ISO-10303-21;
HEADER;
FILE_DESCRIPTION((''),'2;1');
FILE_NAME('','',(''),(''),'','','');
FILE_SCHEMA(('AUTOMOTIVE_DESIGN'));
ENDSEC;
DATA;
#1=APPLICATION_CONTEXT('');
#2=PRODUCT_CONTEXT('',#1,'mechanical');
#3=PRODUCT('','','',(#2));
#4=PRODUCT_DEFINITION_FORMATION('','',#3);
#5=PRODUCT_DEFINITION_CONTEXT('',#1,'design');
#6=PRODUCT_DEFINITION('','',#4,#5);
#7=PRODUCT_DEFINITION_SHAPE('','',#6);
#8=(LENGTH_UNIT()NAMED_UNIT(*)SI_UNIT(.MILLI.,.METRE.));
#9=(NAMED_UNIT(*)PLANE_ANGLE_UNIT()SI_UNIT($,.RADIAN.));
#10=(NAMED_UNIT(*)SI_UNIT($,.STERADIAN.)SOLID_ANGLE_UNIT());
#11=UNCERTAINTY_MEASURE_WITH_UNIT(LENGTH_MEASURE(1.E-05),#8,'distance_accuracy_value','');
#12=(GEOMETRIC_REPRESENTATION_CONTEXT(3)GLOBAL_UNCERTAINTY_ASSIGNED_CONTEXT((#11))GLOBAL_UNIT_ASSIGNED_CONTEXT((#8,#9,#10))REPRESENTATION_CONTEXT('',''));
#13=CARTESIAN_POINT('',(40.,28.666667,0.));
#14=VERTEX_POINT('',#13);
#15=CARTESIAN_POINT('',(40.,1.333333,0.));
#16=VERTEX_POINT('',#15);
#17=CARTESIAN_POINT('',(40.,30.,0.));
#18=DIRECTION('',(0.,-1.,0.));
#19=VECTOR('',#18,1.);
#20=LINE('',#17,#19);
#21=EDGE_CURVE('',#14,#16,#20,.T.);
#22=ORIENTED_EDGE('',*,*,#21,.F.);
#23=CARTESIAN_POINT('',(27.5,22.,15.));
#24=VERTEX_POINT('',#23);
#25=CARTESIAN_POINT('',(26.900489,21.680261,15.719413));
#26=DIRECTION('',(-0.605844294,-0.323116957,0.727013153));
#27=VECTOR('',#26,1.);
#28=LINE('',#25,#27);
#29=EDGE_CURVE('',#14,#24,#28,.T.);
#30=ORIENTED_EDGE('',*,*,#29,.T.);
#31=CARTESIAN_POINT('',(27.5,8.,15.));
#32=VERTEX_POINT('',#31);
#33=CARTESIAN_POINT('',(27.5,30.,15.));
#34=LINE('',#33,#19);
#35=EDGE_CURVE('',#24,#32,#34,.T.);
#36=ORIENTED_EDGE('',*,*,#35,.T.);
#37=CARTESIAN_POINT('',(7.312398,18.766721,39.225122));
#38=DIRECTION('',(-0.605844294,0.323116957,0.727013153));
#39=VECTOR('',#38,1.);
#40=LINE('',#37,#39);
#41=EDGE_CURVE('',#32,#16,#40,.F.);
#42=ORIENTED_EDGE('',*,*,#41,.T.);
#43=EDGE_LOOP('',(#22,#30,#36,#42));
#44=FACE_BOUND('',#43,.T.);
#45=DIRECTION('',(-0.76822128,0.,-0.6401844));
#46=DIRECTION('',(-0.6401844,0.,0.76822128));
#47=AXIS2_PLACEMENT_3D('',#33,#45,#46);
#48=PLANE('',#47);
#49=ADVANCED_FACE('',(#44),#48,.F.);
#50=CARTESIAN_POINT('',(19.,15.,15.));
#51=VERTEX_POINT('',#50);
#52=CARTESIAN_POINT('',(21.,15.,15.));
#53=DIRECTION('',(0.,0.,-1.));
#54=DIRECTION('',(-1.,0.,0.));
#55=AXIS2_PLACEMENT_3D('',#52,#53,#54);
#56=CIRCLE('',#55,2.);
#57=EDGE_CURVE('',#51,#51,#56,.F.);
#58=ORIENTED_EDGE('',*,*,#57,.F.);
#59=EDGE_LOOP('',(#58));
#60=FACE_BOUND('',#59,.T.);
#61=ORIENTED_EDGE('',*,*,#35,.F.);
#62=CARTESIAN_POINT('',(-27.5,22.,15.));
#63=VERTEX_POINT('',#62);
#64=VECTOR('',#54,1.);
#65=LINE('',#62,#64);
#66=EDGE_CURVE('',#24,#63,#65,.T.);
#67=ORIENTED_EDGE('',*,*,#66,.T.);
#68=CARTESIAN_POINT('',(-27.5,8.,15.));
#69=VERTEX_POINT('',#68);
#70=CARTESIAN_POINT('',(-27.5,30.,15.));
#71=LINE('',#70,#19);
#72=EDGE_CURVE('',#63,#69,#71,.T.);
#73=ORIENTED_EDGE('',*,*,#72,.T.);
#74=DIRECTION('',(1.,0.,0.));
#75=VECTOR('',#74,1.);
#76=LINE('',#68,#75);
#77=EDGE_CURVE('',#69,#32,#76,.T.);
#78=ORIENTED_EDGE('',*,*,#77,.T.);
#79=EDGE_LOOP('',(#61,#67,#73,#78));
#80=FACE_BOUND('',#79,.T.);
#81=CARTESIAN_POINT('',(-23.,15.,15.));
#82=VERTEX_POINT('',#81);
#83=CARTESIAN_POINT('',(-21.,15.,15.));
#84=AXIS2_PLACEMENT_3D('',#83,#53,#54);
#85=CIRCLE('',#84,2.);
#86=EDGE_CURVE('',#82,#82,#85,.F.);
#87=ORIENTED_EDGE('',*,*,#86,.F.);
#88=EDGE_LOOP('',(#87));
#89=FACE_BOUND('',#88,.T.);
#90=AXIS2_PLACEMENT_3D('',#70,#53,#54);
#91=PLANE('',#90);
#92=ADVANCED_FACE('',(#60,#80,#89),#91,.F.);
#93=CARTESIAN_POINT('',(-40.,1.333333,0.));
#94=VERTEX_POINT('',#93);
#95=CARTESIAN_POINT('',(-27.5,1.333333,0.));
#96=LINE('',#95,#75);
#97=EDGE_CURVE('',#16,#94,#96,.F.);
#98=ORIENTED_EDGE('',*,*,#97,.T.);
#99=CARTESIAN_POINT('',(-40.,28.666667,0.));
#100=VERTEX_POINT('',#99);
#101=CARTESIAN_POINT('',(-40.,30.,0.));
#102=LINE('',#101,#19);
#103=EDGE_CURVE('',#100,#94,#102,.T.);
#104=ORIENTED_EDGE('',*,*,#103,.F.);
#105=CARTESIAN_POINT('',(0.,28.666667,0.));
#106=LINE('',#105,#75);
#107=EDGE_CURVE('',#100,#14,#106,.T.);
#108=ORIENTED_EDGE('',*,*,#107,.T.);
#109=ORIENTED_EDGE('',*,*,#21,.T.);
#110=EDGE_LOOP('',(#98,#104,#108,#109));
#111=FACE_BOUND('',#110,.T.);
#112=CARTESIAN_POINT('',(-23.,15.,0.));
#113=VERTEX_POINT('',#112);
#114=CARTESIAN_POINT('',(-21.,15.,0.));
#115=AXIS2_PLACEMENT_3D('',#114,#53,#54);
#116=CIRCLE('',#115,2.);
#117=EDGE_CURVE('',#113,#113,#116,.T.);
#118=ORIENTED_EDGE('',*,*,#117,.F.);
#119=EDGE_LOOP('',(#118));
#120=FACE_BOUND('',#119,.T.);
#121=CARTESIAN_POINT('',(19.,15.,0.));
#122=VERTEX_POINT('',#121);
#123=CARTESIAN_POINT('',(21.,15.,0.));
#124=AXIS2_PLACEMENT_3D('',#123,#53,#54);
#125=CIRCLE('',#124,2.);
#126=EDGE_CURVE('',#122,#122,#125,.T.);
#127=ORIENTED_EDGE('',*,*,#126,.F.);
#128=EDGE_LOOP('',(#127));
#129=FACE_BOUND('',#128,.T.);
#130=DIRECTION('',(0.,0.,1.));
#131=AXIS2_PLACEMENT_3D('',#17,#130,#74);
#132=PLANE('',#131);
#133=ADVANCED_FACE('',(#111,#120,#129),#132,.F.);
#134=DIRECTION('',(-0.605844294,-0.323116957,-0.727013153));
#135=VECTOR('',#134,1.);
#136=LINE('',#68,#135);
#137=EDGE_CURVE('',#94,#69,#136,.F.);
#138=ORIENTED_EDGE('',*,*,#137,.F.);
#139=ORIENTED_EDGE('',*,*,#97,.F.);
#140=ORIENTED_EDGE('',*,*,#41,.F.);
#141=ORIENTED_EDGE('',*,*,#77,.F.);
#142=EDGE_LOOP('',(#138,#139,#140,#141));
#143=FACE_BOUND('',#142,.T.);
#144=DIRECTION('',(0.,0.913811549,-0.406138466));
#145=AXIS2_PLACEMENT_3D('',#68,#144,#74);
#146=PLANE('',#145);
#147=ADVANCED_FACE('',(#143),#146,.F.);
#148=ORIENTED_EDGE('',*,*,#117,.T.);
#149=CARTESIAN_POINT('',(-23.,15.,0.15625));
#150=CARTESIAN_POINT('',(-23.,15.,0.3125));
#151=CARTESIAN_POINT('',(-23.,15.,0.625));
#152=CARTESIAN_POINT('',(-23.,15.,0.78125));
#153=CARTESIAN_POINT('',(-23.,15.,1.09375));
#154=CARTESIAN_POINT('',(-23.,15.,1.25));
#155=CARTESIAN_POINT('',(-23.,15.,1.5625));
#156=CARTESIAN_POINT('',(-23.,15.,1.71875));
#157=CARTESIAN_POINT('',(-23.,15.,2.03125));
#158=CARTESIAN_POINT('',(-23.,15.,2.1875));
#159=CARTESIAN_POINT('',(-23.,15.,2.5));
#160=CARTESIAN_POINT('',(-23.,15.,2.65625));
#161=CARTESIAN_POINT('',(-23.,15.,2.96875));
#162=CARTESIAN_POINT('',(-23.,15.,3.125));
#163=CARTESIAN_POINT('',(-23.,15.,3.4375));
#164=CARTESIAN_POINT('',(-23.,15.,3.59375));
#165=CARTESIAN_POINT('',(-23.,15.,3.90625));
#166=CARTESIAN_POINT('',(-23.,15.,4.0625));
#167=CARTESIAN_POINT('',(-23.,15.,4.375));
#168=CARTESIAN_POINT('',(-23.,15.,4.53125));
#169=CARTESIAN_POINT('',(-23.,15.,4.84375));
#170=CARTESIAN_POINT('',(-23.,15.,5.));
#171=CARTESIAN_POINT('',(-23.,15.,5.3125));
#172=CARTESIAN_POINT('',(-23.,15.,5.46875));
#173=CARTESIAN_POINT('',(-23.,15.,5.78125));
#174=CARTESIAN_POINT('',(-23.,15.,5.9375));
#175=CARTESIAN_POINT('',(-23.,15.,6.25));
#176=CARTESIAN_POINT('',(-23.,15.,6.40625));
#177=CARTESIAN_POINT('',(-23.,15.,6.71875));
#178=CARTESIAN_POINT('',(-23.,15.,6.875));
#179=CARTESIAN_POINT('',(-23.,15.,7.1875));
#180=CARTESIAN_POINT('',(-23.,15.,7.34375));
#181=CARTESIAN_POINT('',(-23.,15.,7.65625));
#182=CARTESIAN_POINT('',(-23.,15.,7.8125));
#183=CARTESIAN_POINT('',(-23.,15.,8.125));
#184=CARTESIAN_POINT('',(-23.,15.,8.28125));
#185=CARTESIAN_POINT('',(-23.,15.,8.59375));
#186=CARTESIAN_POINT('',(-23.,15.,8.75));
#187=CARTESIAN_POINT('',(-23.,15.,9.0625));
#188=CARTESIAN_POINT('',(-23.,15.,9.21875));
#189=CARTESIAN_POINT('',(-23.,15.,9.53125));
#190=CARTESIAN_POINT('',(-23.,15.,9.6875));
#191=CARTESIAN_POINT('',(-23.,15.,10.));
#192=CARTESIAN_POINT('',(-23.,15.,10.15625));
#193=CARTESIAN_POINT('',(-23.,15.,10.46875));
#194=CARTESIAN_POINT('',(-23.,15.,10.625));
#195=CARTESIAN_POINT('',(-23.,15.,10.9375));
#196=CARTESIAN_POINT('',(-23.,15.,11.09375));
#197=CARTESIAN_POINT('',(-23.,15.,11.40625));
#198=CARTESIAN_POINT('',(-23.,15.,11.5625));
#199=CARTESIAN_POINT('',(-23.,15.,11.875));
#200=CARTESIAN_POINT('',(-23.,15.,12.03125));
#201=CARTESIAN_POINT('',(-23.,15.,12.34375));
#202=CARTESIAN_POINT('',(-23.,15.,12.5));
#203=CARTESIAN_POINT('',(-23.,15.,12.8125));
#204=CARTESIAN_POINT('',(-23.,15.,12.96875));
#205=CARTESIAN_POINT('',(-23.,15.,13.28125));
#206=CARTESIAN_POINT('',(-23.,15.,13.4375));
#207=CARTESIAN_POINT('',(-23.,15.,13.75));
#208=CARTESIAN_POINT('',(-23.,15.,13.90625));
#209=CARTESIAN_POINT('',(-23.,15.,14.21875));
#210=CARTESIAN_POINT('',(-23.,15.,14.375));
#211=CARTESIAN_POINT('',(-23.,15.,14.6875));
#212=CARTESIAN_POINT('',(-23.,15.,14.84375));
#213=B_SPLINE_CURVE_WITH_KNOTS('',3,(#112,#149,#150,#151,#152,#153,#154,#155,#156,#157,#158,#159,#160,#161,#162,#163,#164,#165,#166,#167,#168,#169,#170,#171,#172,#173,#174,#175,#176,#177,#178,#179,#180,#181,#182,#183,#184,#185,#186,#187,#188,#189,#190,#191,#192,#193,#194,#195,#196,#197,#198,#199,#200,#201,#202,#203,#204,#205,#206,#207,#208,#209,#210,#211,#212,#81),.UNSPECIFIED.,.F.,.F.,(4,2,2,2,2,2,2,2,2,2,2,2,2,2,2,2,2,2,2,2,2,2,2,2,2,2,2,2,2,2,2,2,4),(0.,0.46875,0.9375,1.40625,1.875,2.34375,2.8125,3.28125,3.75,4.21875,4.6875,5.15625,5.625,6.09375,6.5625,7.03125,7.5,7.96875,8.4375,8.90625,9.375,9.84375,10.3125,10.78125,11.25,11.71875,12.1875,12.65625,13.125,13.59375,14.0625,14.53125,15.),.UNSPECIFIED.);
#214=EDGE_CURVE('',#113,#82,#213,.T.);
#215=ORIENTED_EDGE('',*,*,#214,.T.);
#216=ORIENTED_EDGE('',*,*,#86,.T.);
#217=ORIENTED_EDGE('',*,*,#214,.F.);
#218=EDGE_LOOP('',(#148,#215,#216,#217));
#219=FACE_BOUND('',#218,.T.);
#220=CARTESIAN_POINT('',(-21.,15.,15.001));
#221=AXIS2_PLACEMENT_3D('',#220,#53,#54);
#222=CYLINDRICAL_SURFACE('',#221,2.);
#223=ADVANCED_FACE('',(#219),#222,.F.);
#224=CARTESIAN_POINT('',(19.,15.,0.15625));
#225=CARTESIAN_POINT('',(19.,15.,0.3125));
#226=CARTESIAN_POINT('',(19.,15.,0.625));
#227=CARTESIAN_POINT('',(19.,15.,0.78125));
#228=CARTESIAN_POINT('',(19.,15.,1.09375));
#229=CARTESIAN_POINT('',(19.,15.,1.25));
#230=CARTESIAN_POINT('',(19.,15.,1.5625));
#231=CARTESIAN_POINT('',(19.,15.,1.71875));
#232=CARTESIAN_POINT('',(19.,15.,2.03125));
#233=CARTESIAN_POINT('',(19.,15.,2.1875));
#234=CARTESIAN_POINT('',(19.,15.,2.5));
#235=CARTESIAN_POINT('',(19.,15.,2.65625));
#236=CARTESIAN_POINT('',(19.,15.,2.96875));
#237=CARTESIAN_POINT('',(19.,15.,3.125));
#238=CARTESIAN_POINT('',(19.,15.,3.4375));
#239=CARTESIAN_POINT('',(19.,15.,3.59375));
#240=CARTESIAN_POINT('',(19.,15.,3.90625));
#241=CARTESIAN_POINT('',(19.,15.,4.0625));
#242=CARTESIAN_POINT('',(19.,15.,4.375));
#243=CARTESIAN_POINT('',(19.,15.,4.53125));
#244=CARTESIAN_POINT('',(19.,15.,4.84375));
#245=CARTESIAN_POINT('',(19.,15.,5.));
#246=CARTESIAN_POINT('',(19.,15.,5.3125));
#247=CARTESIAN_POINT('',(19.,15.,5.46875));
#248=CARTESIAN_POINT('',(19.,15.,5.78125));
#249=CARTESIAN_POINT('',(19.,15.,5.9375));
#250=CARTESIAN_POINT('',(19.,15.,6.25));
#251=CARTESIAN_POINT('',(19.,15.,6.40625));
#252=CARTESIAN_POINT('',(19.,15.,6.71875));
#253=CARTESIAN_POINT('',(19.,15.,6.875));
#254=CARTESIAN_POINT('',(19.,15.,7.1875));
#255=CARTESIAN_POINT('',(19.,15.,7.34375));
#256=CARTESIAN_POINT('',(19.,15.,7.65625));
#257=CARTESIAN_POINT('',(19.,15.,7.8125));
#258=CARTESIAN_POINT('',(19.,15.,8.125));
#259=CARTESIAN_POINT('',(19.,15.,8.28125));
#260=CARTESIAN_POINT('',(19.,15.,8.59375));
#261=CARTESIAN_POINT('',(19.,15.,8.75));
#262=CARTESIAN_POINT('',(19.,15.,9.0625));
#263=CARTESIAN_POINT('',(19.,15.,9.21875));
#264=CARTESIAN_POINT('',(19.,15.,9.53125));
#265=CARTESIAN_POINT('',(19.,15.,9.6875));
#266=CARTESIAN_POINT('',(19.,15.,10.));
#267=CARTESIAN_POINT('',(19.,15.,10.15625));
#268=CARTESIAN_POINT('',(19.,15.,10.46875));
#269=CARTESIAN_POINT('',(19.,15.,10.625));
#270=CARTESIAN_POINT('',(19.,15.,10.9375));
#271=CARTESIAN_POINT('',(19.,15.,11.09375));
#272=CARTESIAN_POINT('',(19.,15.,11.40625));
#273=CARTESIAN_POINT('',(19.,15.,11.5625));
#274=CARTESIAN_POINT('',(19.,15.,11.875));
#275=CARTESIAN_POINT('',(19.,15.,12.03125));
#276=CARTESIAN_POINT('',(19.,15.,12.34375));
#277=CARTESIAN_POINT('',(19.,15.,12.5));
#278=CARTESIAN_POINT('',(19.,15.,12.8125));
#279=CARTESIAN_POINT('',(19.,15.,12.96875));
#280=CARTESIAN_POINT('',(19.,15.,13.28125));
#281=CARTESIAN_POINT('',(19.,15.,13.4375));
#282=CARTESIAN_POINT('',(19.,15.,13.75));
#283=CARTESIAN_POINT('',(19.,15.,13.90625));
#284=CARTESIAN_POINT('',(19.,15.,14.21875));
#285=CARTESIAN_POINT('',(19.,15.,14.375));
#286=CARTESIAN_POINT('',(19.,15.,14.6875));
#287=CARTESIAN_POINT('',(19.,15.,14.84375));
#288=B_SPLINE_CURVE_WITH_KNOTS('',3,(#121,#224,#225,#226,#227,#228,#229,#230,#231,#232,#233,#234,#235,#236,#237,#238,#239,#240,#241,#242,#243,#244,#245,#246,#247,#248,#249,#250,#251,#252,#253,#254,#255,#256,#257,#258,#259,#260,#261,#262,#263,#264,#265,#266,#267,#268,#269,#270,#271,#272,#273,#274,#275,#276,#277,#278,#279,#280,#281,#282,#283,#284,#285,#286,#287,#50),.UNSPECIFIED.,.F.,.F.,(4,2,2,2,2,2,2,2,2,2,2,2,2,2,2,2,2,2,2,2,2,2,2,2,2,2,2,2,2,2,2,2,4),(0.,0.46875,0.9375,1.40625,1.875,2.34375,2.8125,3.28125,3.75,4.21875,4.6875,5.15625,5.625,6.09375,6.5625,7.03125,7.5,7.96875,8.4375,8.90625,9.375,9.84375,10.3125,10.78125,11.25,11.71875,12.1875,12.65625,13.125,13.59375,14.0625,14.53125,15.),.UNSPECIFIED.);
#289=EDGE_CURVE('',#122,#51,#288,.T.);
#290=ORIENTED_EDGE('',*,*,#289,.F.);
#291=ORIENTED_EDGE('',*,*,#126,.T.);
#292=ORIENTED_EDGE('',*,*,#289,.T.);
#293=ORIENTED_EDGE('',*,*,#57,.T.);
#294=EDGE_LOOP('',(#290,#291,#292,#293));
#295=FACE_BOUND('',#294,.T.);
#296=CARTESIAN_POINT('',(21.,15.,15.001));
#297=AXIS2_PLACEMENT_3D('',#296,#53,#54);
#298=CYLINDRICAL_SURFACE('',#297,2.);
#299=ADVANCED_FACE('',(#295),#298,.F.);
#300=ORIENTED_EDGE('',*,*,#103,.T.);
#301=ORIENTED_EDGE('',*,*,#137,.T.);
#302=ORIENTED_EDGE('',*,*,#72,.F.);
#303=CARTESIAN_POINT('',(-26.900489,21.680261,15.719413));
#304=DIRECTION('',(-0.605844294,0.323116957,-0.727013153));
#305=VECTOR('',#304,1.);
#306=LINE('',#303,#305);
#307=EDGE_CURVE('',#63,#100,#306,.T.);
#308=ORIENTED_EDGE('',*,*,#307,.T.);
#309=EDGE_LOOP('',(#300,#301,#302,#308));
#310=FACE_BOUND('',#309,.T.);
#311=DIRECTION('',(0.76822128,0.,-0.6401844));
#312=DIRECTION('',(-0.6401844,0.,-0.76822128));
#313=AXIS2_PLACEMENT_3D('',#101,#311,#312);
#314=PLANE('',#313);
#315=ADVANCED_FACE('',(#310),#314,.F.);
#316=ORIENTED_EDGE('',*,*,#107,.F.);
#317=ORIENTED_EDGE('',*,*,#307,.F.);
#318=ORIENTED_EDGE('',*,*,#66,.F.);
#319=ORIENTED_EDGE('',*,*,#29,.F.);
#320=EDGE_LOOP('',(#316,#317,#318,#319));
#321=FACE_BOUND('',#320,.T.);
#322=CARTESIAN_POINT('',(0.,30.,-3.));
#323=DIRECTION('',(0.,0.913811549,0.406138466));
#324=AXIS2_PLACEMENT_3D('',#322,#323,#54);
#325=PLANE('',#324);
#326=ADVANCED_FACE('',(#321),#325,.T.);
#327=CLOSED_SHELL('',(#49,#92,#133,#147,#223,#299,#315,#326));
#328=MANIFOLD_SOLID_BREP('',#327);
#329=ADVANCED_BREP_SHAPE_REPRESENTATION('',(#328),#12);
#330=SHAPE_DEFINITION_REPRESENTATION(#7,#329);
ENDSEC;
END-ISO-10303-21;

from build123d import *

# Parameters (mm, degrees)
DODANIE_WYCI_GNI_CIE1_DEPTH = 30
WYTNIJ_WYCI_GNI_CIE1_REACH  = 54.202
SZKIC2_R                    = 2
SFAZOWANIE1_SIZE            = 8
SFAZOWANIE1_SIZE_2          = 18
SFAZOWANIE2_SIZE            = 8
SFAZOWANIE2_SIZE_2          = 18


with BuildPart() as part:
    # Szkic1 → Dodanie-wyciągnięcie1 (new body)
    with BuildSketch(Plane(origin=(0, 0, 0), x_dir=(1, 0, 0), z_dir=(0, 1, 0))):
        Polygon((-40, 0), (-27.5, -15), (27.5, -15), (40, 0), align=None)
    extrude(amount=DODANIE_WYCI_GNI_CIE1_DEPTH)

    # Szkic2 → Wytnij-wyciągnięcie1 (cut, up to next)
    with BuildSketch(Plane(origin=(0, 0, 0), x_dir=(-1, 0, 0), z_dir=(0, 0, -1)), mode=Mode.PRIVATE) as wytnij_wyci_gni_cie1_sk1:
        with Locations((-21, 15)):
            Circle(SZKIC2_R)
    wytnij_wyci_gni_cie1_tool1 = extrude(wytnij_wyci_gni_cie1_sk1.sketch, amount=-WYTNIJ_WYCI_GNI_CIE1_REACH, mode=Mode.PRIVATE) & part.part
    # Szkic2 → Wytnij-wyciągnięcie1 (cut, up to next)
    with BuildSketch(Plane(origin=(0, 0, 0), x_dir=(-1, 0, 0), z_dir=(0, 0, -1)), mode=Mode.PRIVATE) as wytnij_wyci_gni_cie1_sk2:
        with Locations((21, 15)):
            Circle(SZKIC2_R)
    wytnij_wyci_gni_cie1_tool2 = extrude(wytnij_wyci_gni_cie1_sk2.sketch, amount=-WYTNIJ_WYCI_GNI_CIE1_REACH, mode=Mode.PRIVATE) & part.part
    add(wytnij_wyci_gni_cie1_tool1.solids().sort_by_distance((21, 15, 0))[0], mode=Mode.SUBTRACT)
    add(wytnij_wyci_gni_cie1_tool2.solids().sort_by_distance((-21, 15, 0))[0], mode=Mode.SUBTRACT)

    # Sfazowanie1
    # the kernel refuses this chamfer: 18, 8 mm, written as the material it takes off along each edge
    with BuildSketch(Plane(origin=(-74.15058918, 0, 15), x_dir=(0, 0.996867139056945, 0.0790942922619672), z_dir=(1, 0, 0))) as sfazowanie1_piece_1:
        Polygon((SFAZOWANIE1_SIZE * 0.996867139057, -SFAZOWANIE1_SIZE * 0.079094292262), (-SFAZOWANIE1_SIZE_2 * 0.079094292262, -SFAZOWANIE1_SIZE_2 * 0.996867139057), (0, 0), align=None)
    extrude(amount=148.301178361, mode=Mode.SUBTRACT)

    # Sfazowanie2
    # the kernel refuses this chamfer: 18, 8 mm, written as the material it takes off along each edge
    with BuildSketch(Plane(origin=(-74.15058918, 30, 15), x_dir=(0, -0.996867139056945, 0.0790942922619672), z_dir=(1, 0, 0))) as sfazowanie2_piece_1:
        Polygon((SFAZOWANIE2_SIZE * 0.996867139057, SFAZOWANIE2_SIZE * 0.079094292262), (-SFAZOWANIE2_SIZE_2 * 0.079094292262, SFAZOWANIE2_SIZE_2 * 0.996867139057), (0, 0), align=None)
    extrude(amount=148.301178361, mode=Mode.SUBTRACT)


solid = part.part
